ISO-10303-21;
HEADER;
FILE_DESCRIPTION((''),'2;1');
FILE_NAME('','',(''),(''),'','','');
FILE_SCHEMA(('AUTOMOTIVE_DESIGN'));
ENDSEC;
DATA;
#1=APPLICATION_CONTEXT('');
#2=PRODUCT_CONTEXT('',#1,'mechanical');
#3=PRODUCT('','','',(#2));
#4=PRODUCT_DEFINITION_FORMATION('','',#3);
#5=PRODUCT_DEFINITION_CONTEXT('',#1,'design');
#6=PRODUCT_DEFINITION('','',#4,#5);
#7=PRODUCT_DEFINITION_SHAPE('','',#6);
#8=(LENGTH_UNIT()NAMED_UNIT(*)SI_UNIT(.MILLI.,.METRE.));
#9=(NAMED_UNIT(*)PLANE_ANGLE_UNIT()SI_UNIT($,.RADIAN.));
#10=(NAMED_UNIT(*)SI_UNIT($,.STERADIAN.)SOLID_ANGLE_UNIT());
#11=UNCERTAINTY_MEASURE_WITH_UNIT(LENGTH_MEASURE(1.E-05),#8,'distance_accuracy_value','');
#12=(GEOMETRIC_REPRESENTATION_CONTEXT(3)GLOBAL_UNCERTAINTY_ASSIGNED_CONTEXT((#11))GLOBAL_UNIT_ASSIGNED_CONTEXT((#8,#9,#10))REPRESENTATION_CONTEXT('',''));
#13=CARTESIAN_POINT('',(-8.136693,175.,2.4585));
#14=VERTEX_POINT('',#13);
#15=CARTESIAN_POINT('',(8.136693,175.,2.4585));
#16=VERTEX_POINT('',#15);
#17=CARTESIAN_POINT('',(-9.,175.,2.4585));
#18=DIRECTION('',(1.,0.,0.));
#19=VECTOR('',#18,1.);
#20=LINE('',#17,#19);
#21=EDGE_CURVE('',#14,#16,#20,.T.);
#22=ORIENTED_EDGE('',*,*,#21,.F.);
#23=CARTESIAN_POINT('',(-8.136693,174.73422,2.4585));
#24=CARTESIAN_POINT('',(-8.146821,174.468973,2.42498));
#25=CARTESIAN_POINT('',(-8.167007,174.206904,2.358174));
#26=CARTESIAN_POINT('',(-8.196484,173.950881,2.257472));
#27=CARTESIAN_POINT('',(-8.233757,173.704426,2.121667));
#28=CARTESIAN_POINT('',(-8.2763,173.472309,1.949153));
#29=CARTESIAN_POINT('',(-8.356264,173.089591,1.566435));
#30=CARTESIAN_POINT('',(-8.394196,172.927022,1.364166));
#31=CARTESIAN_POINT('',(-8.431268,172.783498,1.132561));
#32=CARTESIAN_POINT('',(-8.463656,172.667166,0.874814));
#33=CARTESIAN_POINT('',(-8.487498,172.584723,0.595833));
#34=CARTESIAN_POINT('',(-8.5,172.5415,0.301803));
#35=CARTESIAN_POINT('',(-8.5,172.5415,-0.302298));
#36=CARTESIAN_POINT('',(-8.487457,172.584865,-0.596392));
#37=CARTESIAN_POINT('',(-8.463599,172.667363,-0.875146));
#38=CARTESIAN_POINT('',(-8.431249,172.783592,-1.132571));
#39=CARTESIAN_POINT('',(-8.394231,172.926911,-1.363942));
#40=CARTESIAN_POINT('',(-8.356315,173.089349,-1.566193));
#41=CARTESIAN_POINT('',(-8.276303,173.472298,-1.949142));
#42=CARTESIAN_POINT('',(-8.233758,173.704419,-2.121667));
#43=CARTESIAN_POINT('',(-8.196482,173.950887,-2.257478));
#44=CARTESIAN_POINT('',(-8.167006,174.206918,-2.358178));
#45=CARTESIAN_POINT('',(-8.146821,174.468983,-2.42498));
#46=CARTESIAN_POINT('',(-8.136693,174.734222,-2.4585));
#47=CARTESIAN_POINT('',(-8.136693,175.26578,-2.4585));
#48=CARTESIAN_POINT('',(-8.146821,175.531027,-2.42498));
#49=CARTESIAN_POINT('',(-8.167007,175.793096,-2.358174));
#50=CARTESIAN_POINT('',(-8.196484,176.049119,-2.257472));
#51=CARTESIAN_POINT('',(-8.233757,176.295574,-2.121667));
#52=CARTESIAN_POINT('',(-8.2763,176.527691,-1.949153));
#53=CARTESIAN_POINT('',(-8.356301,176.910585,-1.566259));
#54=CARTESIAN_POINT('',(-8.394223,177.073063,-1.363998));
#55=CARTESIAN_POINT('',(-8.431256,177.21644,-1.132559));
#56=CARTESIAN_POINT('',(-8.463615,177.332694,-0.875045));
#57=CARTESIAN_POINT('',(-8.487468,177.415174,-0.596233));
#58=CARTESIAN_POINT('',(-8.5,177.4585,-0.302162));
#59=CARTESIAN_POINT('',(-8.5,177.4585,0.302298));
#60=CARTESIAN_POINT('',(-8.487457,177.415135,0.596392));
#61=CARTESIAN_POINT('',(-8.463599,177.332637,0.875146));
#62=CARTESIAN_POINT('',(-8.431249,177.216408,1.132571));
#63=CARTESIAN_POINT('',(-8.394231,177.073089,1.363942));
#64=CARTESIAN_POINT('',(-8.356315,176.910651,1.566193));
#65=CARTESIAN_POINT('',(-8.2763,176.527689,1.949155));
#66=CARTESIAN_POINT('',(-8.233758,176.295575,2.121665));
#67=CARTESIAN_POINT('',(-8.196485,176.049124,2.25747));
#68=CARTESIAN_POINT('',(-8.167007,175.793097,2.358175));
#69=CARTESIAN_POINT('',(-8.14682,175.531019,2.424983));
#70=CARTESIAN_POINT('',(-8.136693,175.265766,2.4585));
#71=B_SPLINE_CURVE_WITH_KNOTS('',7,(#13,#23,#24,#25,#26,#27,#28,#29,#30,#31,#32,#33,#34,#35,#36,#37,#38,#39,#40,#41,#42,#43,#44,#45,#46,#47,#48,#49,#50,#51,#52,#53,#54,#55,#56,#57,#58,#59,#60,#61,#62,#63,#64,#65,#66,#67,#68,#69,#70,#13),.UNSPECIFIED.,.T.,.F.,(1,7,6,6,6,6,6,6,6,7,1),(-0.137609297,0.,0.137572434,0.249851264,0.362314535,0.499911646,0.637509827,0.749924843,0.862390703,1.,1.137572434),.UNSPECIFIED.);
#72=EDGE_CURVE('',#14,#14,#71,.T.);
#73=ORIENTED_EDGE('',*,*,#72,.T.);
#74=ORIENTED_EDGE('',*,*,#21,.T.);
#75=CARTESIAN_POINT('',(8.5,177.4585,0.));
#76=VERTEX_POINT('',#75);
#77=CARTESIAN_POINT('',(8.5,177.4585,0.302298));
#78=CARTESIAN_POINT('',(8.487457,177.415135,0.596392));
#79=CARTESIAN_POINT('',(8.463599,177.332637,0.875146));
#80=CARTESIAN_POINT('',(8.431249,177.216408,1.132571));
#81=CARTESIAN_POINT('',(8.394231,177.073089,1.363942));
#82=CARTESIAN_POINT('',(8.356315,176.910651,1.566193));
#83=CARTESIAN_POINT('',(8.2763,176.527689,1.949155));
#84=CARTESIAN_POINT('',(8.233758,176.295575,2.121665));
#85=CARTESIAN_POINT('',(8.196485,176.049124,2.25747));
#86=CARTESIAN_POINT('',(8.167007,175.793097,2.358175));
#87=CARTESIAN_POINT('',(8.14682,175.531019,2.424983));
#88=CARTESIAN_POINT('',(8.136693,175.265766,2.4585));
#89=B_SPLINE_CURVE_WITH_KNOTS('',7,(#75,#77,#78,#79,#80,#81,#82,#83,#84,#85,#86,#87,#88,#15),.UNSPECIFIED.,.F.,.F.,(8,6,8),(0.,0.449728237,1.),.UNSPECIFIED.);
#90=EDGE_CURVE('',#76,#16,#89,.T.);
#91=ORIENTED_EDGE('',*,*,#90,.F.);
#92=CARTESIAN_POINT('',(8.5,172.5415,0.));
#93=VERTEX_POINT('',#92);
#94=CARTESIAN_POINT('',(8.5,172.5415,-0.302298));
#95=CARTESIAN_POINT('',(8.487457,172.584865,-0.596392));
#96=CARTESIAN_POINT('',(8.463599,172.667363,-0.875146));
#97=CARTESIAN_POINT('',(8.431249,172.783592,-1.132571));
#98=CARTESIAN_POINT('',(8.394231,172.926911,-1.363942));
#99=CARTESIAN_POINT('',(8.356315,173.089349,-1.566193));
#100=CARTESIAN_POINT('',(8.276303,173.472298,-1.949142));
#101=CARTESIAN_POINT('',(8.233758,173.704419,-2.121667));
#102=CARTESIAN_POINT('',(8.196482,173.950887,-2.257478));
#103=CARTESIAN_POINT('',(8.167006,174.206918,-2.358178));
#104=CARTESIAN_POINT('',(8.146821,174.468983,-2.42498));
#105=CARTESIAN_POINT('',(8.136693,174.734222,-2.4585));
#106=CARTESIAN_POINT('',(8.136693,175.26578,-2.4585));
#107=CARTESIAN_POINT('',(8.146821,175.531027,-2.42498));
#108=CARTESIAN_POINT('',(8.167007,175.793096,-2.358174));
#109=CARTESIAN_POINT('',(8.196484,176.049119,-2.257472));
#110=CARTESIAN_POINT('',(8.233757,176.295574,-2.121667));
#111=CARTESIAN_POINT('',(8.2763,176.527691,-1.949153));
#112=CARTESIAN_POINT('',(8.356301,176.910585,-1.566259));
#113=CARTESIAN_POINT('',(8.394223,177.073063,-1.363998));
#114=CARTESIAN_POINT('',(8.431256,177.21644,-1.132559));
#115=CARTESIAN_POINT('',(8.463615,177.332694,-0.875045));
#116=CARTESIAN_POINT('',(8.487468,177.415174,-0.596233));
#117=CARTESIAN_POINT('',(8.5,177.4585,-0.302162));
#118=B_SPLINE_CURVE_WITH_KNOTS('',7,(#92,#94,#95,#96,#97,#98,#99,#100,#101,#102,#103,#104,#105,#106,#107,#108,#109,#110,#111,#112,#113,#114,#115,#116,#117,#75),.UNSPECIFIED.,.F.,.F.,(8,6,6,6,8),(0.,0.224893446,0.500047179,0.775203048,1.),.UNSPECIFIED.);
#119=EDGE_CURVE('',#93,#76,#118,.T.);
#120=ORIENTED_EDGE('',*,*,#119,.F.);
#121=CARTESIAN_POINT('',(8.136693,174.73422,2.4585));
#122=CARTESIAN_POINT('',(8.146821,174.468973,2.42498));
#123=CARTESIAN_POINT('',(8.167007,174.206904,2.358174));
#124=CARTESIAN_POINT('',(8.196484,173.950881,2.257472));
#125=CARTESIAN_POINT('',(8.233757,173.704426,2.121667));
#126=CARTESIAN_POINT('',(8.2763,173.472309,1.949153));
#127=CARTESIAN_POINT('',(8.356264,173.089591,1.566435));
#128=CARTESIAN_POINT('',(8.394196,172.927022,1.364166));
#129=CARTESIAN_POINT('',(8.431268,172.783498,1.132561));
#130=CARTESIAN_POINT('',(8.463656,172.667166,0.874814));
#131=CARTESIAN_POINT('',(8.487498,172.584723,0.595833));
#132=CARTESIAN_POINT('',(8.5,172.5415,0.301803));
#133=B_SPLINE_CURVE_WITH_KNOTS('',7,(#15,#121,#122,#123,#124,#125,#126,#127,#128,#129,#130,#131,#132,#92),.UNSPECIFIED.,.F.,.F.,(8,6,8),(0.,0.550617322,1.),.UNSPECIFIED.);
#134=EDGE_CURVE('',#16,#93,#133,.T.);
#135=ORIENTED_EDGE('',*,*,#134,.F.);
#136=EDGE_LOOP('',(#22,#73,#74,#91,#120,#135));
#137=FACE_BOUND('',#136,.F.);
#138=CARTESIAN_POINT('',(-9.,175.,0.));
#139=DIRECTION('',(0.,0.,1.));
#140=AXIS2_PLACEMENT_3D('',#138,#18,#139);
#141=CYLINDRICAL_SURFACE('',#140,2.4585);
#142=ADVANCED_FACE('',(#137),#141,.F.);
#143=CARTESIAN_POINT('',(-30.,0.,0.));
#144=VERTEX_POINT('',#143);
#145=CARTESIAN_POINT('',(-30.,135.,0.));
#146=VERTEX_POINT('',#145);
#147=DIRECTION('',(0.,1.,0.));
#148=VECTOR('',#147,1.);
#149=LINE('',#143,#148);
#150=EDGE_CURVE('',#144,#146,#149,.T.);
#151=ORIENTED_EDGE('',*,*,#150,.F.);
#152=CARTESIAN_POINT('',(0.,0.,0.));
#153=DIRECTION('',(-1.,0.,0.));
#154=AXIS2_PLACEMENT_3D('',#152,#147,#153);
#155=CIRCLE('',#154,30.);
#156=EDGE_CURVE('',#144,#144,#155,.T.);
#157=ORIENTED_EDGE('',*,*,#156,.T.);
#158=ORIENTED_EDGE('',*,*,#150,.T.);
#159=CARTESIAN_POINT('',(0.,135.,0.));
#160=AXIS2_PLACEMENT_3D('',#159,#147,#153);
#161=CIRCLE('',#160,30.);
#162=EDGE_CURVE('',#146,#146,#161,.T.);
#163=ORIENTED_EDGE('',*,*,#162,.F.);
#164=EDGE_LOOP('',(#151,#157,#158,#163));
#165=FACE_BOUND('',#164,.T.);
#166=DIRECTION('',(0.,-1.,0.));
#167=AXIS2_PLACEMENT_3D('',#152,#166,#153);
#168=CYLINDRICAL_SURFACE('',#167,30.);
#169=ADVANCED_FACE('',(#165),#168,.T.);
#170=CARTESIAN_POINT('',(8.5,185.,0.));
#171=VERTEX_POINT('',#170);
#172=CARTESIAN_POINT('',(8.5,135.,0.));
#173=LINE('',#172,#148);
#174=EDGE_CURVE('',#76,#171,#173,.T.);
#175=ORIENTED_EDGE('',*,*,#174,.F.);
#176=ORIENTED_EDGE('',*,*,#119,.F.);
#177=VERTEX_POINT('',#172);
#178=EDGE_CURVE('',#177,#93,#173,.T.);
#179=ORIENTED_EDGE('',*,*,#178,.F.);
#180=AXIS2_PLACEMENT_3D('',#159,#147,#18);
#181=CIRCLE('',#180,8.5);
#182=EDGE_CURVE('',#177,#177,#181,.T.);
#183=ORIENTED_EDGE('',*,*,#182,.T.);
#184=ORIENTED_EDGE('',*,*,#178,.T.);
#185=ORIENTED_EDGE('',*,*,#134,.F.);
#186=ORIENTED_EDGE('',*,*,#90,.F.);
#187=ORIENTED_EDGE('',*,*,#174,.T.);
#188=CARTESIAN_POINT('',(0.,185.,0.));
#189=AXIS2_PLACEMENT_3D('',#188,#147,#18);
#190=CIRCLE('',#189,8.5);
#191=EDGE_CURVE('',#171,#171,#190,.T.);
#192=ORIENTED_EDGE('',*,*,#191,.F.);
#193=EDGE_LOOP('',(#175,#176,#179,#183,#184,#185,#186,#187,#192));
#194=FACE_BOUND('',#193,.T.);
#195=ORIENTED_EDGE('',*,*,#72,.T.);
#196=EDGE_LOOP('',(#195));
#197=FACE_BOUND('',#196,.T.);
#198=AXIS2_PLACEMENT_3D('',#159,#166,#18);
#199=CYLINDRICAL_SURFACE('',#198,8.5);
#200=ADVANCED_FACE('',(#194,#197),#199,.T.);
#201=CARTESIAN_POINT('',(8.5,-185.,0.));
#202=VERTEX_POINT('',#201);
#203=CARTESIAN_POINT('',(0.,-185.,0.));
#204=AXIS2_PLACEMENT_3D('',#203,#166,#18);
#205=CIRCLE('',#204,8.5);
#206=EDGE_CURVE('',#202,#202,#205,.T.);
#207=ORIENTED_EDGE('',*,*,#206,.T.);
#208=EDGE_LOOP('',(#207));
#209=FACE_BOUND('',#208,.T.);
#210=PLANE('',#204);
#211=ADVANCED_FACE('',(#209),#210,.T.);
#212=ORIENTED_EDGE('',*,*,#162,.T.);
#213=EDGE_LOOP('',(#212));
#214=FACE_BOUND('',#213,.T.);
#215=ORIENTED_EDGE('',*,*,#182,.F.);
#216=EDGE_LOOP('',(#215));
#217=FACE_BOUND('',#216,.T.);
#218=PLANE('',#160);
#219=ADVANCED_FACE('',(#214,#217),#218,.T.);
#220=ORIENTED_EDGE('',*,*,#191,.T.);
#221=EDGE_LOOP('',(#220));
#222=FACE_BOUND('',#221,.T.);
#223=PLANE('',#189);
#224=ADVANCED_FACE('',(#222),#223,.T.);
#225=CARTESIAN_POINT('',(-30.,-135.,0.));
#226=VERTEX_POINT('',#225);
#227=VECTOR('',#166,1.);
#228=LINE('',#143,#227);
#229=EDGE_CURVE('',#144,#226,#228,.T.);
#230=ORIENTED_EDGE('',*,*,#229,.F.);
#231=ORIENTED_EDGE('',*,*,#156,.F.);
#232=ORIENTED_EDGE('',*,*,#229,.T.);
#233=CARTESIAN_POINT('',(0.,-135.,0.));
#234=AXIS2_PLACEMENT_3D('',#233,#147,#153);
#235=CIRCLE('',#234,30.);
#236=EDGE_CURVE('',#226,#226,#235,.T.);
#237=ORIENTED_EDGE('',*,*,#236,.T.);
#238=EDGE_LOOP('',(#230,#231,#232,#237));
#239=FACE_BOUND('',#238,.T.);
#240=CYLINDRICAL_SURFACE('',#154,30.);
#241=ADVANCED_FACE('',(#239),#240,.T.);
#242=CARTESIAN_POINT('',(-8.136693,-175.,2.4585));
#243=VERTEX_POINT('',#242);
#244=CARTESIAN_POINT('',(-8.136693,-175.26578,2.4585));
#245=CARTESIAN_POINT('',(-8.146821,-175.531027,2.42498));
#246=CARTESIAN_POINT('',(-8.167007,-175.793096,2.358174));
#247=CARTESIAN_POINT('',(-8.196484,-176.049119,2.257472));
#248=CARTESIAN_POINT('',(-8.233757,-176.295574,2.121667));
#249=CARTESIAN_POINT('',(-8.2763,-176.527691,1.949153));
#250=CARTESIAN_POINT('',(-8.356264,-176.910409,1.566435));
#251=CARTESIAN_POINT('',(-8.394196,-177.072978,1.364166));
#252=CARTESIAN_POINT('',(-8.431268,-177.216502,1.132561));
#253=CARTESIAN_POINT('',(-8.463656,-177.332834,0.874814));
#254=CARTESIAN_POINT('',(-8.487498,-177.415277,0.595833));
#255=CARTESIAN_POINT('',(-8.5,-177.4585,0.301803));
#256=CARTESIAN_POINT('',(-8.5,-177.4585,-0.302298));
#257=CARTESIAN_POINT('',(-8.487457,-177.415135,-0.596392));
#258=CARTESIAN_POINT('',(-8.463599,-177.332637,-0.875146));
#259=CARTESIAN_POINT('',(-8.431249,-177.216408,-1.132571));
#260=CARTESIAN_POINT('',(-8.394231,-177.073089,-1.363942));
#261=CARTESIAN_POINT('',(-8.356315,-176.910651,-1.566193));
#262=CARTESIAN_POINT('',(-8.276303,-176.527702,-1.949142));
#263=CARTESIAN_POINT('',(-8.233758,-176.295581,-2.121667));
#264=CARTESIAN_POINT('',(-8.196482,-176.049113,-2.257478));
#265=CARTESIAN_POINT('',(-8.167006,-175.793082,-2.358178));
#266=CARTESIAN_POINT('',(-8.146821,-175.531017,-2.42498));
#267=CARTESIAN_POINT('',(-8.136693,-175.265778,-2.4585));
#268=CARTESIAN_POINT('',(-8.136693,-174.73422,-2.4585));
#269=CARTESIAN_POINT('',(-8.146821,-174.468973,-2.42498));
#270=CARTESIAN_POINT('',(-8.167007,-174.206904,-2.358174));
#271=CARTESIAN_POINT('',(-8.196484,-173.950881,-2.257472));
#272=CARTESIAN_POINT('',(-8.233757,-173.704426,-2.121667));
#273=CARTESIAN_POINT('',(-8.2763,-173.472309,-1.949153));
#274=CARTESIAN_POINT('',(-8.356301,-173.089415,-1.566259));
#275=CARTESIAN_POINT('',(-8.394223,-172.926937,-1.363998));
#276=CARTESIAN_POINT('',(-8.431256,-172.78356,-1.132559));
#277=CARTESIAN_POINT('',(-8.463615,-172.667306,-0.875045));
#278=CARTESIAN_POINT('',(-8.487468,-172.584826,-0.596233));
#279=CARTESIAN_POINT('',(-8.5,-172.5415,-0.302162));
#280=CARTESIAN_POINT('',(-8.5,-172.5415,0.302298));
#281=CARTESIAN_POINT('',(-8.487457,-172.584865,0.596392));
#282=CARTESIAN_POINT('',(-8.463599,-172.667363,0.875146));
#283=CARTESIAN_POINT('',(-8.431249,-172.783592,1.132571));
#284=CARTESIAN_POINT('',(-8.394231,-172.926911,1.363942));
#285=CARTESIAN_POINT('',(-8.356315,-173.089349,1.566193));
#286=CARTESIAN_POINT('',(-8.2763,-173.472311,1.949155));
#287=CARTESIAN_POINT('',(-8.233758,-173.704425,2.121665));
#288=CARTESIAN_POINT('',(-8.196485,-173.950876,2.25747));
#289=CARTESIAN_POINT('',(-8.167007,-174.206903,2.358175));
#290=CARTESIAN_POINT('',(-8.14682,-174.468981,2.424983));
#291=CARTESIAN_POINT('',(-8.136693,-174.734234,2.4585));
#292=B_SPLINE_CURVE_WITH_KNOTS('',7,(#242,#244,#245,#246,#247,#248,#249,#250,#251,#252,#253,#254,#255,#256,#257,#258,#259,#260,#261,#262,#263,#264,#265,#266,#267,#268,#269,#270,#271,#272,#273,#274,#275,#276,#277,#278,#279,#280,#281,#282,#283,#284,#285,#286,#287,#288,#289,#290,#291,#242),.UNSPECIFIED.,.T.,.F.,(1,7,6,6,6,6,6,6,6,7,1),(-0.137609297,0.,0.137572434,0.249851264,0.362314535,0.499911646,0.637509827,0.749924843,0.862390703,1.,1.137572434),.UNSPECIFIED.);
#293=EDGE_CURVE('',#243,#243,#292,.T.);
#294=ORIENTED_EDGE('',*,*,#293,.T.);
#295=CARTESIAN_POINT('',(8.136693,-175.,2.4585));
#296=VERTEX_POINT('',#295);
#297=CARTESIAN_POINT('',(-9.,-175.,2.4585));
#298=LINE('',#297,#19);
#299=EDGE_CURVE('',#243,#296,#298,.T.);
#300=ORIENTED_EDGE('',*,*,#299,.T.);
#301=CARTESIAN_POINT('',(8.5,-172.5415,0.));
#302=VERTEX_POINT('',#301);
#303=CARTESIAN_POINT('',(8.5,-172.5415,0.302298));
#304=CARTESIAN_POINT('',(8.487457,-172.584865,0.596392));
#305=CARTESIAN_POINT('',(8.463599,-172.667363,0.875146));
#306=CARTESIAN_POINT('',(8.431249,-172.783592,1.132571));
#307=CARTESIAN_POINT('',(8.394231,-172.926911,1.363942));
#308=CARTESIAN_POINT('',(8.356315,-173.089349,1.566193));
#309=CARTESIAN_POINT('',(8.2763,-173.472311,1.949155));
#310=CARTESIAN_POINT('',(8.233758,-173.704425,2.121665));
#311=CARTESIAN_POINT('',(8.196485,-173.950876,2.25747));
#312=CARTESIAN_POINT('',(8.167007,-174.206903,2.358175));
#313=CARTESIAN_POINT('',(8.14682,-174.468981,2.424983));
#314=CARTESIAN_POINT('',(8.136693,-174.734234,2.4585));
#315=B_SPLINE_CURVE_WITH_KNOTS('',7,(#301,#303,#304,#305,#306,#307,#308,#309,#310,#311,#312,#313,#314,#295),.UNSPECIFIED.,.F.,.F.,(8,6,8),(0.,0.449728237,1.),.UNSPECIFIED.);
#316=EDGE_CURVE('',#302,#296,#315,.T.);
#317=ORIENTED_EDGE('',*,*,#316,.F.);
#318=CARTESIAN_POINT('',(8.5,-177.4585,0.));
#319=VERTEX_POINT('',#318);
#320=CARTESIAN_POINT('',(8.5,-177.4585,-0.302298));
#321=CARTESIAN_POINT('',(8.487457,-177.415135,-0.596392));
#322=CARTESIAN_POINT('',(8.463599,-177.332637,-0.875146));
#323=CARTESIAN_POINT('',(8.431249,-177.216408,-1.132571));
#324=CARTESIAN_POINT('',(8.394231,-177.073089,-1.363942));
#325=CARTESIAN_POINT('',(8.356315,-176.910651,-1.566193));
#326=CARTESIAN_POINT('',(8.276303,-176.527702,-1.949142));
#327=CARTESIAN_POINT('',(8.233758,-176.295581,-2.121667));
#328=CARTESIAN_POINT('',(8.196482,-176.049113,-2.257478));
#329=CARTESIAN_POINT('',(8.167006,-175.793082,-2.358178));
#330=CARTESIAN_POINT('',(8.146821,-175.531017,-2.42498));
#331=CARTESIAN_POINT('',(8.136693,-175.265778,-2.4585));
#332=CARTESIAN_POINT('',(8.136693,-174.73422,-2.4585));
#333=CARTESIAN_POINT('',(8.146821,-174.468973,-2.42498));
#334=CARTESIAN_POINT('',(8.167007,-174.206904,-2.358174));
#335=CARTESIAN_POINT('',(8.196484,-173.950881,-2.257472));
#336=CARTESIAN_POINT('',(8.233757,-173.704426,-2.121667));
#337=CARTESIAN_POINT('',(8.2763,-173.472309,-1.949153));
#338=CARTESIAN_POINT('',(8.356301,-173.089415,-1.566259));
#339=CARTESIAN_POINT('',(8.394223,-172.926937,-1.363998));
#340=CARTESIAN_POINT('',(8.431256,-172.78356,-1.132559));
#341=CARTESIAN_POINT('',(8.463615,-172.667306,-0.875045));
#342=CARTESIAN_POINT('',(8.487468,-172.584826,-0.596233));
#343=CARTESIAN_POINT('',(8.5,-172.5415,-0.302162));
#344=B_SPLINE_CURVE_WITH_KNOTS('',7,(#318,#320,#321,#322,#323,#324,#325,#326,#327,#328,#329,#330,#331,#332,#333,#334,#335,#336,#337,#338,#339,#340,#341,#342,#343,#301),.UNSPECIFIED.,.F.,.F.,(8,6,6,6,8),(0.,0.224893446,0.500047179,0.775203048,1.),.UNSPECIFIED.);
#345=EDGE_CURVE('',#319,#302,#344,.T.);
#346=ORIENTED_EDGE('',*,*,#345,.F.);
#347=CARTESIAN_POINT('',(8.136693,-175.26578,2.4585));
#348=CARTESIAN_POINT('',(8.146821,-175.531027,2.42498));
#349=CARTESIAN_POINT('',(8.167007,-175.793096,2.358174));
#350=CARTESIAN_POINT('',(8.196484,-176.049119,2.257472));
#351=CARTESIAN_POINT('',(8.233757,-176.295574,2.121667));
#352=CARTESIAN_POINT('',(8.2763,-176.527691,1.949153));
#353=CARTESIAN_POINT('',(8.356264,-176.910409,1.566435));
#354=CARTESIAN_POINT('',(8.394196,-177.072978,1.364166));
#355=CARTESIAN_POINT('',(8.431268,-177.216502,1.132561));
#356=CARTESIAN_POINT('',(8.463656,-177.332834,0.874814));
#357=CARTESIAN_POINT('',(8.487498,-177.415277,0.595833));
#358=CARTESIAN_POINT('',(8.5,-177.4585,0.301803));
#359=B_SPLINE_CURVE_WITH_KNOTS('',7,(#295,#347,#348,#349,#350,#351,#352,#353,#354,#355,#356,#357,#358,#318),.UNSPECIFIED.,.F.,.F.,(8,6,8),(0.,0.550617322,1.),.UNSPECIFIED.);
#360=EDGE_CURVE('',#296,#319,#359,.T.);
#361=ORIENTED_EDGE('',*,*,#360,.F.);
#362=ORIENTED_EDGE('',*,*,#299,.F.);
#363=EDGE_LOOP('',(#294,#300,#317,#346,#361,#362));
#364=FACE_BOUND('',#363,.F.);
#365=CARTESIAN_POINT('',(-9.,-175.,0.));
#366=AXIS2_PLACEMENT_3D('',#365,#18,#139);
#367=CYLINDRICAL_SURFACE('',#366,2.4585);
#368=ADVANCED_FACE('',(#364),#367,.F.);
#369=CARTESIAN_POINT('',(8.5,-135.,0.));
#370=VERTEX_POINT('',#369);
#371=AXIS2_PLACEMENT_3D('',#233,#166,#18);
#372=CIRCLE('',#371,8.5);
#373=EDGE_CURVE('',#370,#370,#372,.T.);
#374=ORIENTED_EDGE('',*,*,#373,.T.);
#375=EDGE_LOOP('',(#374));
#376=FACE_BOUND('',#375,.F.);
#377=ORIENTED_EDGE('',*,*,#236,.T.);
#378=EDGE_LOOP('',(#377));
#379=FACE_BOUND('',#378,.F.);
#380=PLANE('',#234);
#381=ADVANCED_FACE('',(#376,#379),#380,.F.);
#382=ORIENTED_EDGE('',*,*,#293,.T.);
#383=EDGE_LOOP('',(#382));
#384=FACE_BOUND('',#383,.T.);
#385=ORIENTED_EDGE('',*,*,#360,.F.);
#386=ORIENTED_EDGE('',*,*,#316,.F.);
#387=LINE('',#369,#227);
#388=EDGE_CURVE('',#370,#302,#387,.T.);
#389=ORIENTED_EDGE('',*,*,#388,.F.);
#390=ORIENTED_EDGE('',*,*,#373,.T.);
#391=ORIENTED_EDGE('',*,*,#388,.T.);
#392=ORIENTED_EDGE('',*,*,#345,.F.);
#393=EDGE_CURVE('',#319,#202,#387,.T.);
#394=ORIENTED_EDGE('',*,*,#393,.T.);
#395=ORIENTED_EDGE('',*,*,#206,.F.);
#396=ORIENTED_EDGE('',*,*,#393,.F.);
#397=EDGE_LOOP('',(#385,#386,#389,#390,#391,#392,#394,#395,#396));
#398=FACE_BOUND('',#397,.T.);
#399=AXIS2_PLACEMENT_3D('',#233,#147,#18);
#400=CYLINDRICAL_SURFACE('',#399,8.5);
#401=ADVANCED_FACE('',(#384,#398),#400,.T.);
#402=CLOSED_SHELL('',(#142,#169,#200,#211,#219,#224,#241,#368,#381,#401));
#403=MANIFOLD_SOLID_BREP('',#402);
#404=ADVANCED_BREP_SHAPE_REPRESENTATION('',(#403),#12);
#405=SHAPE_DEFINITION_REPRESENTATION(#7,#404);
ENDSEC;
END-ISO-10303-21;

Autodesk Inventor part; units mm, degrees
ref_plane "YZ Plane" through (0, 0, 0) normal (1, 0, 0) x (0, 1, 0)
ref_plane "XZ Plane" through (0, 0, 0) normal (0, 1, 0) x (-1, 0, 0)
sketch "Sketch1" plane through (0, 0, 0) normal (0, 1, 0) x (-1, 0, 0)
  circle A0 centre (0, 0) radius 30
  dimension "d0" = 60
extrude "Extrusion1" add sketch "Sketch1" along normal mid plane 270
sketch "Sketch2" plane through (0, -135, 0) normal (0, -1, 0) x (1, 0, 0)
  circle A0 centre (0, 0) radius 8.5
  dimension "d3" = 17
extrude "Extrusion2" add sketch "Sketch2" along normal blind 50
sketch "Sketch3" plane through (0, 135, 0) normal (0, 1, 0) x (1, 0, 0)
  circle A0 centre (0, 0) radius 8.5 projected
  circle A1 centre (0, 0) radius 8.5
  dimension "d6" = 17
extrude "Extrusion3" add sketch "Sketch3" along normal blind 50
ref_plane "Work Plane1" through (-9, 135, 0) normal (-1, 0, 0) x (0, 1, 0)
sketch "Sketch4" plane through (-9, 135, 0) normal (-1, 0, 0) x (0, 1, 0)
  circle A0 centre (40, 0) radius 4 projected
  circle A1 centre (-310, 0) radius 4 projected
  point P0 (-135, 0)
hole "Hole1" at (-9, 175, 0) at (-9, -175, 0) direction (1, 0, 0) diameter 4.917 end through all thread size "M6x1" class "6H" standard "ISO Metric profile"
properties part number "HCMUTE-CDT23-TRUC_CANG" material "Stainless Steel"
